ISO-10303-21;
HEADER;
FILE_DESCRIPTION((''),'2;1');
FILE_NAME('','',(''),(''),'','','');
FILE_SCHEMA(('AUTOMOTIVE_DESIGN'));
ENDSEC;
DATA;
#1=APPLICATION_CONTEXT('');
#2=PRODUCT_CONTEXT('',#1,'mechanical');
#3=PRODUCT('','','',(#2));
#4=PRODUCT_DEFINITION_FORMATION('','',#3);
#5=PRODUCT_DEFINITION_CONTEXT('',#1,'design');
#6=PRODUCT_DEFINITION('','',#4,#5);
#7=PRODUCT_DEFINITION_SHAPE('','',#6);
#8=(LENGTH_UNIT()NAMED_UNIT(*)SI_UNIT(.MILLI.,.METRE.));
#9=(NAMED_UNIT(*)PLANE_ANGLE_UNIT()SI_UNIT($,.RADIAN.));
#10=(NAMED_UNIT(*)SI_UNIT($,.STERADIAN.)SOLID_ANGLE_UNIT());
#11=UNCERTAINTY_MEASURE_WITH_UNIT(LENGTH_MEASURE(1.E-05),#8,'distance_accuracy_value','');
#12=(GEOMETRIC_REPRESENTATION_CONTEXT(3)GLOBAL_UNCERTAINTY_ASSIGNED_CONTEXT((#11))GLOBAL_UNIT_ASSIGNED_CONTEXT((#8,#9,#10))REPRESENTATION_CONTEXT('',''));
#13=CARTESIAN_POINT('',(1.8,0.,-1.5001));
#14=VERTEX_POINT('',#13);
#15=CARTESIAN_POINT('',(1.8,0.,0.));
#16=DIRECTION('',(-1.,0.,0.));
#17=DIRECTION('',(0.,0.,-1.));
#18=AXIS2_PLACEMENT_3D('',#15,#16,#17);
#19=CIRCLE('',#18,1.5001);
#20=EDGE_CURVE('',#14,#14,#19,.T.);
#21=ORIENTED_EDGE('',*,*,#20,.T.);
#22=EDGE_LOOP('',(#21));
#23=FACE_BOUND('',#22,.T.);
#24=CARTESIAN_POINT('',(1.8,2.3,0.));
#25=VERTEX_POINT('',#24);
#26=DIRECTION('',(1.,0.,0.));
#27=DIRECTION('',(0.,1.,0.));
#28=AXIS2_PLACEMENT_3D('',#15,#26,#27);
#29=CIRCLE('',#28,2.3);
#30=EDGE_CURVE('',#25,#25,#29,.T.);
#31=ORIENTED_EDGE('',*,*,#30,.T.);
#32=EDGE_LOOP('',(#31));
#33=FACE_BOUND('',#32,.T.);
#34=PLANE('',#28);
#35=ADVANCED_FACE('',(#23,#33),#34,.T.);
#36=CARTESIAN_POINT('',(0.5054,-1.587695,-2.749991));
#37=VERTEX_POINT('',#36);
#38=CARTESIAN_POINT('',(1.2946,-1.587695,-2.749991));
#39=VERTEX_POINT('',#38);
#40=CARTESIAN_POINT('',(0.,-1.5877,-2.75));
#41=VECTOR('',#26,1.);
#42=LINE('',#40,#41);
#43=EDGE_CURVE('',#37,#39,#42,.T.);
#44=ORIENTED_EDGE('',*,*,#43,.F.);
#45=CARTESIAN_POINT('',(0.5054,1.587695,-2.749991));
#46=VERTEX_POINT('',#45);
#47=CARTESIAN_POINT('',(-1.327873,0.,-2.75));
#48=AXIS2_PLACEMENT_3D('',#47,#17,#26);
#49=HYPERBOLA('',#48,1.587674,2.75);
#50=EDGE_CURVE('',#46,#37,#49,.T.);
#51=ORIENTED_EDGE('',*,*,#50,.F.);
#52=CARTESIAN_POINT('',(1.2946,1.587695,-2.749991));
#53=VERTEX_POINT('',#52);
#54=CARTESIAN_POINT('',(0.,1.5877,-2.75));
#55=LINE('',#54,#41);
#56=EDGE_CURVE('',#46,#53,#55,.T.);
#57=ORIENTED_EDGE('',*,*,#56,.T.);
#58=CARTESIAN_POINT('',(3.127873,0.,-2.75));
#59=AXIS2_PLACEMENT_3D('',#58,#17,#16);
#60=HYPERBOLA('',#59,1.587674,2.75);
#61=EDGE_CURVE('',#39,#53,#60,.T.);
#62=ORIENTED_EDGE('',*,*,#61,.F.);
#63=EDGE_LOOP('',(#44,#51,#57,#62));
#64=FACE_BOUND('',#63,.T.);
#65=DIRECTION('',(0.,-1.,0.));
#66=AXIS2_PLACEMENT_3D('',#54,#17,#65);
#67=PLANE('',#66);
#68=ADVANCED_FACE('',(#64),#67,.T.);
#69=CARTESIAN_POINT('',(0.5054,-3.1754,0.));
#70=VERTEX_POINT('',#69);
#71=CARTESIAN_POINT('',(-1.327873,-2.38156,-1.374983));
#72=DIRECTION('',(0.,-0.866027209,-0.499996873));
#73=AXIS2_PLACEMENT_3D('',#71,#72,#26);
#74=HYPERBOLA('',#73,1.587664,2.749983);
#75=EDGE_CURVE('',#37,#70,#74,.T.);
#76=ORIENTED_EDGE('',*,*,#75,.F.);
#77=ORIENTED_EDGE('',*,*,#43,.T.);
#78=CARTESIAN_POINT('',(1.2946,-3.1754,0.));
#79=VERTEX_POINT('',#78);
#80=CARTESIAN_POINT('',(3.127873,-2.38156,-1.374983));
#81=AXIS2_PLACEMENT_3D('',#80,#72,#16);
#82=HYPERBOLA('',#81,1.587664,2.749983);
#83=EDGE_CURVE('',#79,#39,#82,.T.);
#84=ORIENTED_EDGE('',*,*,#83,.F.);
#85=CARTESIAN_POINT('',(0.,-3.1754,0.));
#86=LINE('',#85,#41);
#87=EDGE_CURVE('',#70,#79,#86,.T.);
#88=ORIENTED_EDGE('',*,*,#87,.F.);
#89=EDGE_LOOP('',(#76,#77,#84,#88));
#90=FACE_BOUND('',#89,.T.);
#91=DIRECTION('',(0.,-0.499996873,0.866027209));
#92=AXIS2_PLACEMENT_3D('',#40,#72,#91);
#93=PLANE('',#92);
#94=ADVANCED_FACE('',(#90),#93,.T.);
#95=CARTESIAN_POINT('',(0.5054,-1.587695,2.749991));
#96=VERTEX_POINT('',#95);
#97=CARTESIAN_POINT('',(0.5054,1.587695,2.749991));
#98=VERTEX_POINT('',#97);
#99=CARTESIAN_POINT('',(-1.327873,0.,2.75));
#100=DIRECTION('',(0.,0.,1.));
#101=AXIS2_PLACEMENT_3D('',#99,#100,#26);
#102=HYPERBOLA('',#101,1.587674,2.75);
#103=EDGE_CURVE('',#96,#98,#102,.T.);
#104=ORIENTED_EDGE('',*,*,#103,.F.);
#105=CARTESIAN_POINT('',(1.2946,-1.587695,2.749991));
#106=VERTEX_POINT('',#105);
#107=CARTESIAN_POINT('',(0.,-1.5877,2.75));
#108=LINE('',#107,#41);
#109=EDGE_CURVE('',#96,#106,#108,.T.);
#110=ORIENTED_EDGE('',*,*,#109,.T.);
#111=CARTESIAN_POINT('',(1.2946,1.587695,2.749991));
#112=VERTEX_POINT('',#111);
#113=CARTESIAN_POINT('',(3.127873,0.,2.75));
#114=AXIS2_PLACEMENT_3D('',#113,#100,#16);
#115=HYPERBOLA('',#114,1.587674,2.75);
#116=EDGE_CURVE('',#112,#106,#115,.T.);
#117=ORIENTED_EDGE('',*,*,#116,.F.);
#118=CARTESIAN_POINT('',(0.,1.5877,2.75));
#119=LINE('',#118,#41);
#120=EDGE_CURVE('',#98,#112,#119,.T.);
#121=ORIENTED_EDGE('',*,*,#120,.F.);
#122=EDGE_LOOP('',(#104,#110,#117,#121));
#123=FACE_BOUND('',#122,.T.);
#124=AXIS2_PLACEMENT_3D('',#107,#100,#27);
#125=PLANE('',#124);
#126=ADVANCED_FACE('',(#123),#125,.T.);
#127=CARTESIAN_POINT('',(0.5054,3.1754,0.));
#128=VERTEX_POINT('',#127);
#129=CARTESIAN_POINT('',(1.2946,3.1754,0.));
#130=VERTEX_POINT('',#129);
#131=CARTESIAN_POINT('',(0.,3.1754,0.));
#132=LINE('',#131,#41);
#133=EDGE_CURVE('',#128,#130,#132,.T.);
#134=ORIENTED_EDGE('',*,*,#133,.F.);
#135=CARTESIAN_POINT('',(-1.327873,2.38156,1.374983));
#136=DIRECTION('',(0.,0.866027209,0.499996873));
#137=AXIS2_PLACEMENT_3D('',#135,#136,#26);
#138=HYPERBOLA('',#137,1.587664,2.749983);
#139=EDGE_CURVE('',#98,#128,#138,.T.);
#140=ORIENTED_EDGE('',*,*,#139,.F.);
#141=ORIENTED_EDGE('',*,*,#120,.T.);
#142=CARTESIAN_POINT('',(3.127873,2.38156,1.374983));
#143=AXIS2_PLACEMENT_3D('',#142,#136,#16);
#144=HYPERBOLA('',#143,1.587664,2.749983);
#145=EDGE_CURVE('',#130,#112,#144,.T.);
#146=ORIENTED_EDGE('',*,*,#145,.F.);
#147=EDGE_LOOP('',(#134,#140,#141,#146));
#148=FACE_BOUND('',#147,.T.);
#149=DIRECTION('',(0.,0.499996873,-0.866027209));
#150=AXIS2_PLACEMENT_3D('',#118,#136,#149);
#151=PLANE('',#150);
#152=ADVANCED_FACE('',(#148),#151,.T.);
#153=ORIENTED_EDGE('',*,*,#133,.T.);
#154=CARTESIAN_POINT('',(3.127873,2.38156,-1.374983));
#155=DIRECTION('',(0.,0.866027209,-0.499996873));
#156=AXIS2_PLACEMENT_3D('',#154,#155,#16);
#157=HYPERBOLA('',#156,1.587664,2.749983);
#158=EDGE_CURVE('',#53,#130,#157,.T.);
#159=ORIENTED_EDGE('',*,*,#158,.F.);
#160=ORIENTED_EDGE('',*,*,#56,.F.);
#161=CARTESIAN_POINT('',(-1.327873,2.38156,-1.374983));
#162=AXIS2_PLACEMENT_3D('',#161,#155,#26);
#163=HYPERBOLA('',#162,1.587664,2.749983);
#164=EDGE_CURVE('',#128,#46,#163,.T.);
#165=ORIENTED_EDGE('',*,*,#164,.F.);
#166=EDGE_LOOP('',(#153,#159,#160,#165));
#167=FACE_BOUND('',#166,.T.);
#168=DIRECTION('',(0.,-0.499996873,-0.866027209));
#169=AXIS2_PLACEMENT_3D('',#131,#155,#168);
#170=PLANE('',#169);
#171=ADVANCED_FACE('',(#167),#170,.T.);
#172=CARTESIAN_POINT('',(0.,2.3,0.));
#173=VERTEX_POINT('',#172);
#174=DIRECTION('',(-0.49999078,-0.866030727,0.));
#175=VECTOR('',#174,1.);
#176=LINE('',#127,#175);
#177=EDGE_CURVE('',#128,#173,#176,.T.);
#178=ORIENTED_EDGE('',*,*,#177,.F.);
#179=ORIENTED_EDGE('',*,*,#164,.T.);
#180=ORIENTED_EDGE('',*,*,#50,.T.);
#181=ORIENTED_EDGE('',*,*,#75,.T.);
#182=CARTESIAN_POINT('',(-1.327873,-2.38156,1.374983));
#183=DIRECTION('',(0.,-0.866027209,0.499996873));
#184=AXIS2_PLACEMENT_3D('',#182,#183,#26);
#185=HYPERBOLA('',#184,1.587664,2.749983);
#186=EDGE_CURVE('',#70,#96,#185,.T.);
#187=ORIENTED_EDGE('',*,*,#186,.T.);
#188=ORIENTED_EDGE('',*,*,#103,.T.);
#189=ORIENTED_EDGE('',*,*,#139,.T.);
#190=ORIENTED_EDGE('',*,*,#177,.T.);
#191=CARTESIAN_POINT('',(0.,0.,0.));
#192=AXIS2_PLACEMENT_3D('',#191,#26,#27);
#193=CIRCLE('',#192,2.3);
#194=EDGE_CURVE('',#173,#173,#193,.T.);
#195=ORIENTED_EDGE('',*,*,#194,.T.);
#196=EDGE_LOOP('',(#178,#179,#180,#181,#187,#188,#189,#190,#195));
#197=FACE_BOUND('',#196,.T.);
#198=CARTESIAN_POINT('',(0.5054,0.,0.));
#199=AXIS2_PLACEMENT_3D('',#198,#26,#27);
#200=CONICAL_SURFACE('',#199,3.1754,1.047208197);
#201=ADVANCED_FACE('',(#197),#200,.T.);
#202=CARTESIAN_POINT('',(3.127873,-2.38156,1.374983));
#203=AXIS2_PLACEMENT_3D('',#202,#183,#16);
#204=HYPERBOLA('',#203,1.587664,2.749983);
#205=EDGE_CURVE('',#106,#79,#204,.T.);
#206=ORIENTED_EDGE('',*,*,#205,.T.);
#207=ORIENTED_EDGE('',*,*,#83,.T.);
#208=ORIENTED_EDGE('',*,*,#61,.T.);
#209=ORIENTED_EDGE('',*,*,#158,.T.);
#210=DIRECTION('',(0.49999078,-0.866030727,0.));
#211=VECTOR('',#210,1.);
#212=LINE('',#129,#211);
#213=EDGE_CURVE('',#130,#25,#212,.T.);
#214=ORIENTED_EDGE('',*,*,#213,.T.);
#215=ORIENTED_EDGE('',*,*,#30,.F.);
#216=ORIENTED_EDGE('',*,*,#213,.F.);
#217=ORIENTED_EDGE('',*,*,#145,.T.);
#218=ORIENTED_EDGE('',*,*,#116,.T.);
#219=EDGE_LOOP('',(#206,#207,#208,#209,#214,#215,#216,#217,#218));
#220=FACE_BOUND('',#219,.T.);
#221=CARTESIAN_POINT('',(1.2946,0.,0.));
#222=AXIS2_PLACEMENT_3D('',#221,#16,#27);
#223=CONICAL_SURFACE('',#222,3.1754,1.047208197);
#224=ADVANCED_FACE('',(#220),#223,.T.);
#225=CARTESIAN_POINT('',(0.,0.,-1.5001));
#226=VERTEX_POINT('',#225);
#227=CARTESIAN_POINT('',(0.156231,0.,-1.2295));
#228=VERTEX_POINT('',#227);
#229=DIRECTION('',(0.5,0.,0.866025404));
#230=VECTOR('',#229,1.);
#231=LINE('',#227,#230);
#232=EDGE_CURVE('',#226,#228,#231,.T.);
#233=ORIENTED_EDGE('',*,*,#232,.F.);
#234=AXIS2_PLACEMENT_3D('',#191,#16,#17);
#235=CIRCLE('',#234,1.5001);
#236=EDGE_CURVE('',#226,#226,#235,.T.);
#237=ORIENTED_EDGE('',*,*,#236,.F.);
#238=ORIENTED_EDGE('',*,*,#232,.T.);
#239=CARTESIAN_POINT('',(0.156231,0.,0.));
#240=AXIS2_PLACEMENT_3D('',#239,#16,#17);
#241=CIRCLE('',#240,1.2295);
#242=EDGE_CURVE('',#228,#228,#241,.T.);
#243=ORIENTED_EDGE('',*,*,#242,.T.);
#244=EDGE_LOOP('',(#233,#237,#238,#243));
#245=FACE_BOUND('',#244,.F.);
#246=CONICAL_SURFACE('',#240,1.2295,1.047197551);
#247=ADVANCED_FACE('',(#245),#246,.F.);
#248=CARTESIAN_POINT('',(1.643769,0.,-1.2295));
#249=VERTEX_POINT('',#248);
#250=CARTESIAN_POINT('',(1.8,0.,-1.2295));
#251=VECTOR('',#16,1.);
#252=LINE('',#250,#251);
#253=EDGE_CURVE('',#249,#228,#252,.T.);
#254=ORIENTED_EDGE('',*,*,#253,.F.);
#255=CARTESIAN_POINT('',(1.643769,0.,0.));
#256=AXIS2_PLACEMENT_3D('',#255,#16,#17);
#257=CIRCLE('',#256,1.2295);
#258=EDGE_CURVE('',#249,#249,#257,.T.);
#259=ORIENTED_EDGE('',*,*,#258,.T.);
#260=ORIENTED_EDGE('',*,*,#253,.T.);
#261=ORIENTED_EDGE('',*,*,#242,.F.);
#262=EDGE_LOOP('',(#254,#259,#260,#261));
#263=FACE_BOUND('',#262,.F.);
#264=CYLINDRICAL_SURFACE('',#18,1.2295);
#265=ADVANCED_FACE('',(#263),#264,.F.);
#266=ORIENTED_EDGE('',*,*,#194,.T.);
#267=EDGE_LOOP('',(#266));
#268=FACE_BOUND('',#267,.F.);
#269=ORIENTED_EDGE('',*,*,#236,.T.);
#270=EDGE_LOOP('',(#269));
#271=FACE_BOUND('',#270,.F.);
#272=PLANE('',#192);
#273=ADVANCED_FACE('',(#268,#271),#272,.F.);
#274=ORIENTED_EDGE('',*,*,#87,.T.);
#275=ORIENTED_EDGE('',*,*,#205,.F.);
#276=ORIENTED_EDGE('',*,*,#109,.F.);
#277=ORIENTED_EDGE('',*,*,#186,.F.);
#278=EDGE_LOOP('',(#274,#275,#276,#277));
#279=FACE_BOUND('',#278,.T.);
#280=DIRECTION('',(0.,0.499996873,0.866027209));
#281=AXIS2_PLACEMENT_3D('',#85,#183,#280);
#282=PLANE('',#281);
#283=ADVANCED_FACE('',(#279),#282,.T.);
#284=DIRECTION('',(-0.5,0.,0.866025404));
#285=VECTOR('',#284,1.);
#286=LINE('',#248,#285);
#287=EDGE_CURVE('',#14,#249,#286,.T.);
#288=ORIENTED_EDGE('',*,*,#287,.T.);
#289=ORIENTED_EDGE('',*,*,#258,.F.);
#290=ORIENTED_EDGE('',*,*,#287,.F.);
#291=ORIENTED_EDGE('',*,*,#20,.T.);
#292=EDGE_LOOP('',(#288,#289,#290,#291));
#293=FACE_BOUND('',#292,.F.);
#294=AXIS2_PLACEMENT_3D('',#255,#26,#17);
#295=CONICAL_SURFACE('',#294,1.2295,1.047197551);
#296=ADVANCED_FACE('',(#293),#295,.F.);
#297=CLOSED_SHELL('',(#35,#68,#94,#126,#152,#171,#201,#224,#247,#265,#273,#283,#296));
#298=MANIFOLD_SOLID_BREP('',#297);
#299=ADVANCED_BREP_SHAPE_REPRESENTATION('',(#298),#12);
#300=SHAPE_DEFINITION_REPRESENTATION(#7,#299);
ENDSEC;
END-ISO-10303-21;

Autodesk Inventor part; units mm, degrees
ref_plane "YZ Plane" through (0, 0, 0) normal (1, 0, 0) x (0, 1, 0)
ref_plane "XZ Plane" through (0, 0, 0) normal (0, 1, 0) x (-1, 0, 0)
sketch "Skizze1" plane through (0, 0, 0) normal (1, 0, 0) x (0, 1, 0)
  line L0 (-3.1754, 0) -> (-1.5877, 2.75)
  line L1 (-1.5877, 2.75) -> (1.5877, 2.75)
  line L2 (1.5877, 2.75) -> (3.1754, 0)
  line L3 (3.1754, 0) -> (1.5877, -2.75)
  line L4 (1.5877, -2.75) -> (-1.5877, -2.75)
  line L5 (-1.5877, -2.75) -> (-3.1754, 0)
  point P0 (0, 0)
  point P1 (0, 0)
  dimension "d0" = 6.3509
extrude "Körper" add sketch "Skizze1" along normal blind 1.8
sketch "Skizze2" plane through (0, 0, 0) normal (0, 0, 1) x (1, 0, 0)
  line L0 (0, 1.5877) -> (0, 3.1754) projected
  line L1 (0, 3.1754) -> (1.8, 3.1754) projected
  line L2 (1.8, 1.5877) -> (1.8, 3.1754) projected
  line L3 (-0.36, 0) -> (2.16, 0) projected
  line L4 (0.5054, 3.1754) -> (0, 2.3)
  line L5 (1.2946, 3.1754) -> (1.8, 2.3)
  dimension "d3" = 30
  dimension "d4" = 30
  dimension "d5" = 4.6
  dimension "d6" = 4.6
revolve "Fase1" cut sketch "Skizze2" angle 360 about axis through (-10, 0, 0) along (1, 0, 0)
sketch "Skizze3" plane through (1.8, 0, 0) normal (1, 0, 0) x (0, 0, -1)
  arc A0 (-0.625, -1.0825) -> (0.625, -1.0825) centre (0, 0) ccw projected
hole "Gewinde" at (1.8, 0, 0) direction (-1, 0, 0) diameter 2.459 end through all thread size "M3x0.5" class "6H" standard "ISO Metric profile"
chamfer "Fase2" distance 0.2706 angle 30 1 edges at (1.8, 0, 1.2295) measured on face at (1.8, 1.9179, -0.2329)
chamfer "Fase3" distance 0.2706 angle 30 1 edges at (0, 0, 1.2295) measured on face at (0, 1.9179, -0.2329)
ref_plane "Work Plane1" through (-6.7921, 0, 0) normal (0, -0.8660254, -0.5) x (1, 0, 0)
equation "\"d0\" = 1.1547 * SW"
equation "\"d1\" = KOH"
equation "\"d3\" = ANG1"
equation "\"d4\" = ANG2"
equation "\"d5\" = SW0"
equation "\"d6\" = SW01"
equation "\"d8\" = -0.5 * GD1 + 0.5 * NND"
equation "\"d40\" = -0.5 * GD1 + 0.5 * NND"
equation "\"d10\" = -0.5 * GD1 + 0.5 * NND"
equation "\"d41\" = -0.5 * GD1 + 0.5 * NND"
equation "\"ANG1\" = 30deg"
equation "\"ANG2\" = 30deg"
equation "\"NND\" = 3"
equation "\"KOH\" = 1.8"
equation "\"SW\" = 5.5"
equation "\"SW0\" = 4.6"
equation "\"SW01\" = SW0"
equation "\"GUL\" = 0.541266 * PTC"
equation "\"THREADDIA\" = 3"
equation "\"TOA\" = 30deg"
equation "\"PTC\" = 0.5"
equation "\"E0\" = 1.155 * SW"
equation "\"GAL\" = 0.541266 * PTC"
equation "\"GD1\" = 2.458734"
properties part number "ISO 4035 - M3(1)" material "Edelstahl, 440C"
